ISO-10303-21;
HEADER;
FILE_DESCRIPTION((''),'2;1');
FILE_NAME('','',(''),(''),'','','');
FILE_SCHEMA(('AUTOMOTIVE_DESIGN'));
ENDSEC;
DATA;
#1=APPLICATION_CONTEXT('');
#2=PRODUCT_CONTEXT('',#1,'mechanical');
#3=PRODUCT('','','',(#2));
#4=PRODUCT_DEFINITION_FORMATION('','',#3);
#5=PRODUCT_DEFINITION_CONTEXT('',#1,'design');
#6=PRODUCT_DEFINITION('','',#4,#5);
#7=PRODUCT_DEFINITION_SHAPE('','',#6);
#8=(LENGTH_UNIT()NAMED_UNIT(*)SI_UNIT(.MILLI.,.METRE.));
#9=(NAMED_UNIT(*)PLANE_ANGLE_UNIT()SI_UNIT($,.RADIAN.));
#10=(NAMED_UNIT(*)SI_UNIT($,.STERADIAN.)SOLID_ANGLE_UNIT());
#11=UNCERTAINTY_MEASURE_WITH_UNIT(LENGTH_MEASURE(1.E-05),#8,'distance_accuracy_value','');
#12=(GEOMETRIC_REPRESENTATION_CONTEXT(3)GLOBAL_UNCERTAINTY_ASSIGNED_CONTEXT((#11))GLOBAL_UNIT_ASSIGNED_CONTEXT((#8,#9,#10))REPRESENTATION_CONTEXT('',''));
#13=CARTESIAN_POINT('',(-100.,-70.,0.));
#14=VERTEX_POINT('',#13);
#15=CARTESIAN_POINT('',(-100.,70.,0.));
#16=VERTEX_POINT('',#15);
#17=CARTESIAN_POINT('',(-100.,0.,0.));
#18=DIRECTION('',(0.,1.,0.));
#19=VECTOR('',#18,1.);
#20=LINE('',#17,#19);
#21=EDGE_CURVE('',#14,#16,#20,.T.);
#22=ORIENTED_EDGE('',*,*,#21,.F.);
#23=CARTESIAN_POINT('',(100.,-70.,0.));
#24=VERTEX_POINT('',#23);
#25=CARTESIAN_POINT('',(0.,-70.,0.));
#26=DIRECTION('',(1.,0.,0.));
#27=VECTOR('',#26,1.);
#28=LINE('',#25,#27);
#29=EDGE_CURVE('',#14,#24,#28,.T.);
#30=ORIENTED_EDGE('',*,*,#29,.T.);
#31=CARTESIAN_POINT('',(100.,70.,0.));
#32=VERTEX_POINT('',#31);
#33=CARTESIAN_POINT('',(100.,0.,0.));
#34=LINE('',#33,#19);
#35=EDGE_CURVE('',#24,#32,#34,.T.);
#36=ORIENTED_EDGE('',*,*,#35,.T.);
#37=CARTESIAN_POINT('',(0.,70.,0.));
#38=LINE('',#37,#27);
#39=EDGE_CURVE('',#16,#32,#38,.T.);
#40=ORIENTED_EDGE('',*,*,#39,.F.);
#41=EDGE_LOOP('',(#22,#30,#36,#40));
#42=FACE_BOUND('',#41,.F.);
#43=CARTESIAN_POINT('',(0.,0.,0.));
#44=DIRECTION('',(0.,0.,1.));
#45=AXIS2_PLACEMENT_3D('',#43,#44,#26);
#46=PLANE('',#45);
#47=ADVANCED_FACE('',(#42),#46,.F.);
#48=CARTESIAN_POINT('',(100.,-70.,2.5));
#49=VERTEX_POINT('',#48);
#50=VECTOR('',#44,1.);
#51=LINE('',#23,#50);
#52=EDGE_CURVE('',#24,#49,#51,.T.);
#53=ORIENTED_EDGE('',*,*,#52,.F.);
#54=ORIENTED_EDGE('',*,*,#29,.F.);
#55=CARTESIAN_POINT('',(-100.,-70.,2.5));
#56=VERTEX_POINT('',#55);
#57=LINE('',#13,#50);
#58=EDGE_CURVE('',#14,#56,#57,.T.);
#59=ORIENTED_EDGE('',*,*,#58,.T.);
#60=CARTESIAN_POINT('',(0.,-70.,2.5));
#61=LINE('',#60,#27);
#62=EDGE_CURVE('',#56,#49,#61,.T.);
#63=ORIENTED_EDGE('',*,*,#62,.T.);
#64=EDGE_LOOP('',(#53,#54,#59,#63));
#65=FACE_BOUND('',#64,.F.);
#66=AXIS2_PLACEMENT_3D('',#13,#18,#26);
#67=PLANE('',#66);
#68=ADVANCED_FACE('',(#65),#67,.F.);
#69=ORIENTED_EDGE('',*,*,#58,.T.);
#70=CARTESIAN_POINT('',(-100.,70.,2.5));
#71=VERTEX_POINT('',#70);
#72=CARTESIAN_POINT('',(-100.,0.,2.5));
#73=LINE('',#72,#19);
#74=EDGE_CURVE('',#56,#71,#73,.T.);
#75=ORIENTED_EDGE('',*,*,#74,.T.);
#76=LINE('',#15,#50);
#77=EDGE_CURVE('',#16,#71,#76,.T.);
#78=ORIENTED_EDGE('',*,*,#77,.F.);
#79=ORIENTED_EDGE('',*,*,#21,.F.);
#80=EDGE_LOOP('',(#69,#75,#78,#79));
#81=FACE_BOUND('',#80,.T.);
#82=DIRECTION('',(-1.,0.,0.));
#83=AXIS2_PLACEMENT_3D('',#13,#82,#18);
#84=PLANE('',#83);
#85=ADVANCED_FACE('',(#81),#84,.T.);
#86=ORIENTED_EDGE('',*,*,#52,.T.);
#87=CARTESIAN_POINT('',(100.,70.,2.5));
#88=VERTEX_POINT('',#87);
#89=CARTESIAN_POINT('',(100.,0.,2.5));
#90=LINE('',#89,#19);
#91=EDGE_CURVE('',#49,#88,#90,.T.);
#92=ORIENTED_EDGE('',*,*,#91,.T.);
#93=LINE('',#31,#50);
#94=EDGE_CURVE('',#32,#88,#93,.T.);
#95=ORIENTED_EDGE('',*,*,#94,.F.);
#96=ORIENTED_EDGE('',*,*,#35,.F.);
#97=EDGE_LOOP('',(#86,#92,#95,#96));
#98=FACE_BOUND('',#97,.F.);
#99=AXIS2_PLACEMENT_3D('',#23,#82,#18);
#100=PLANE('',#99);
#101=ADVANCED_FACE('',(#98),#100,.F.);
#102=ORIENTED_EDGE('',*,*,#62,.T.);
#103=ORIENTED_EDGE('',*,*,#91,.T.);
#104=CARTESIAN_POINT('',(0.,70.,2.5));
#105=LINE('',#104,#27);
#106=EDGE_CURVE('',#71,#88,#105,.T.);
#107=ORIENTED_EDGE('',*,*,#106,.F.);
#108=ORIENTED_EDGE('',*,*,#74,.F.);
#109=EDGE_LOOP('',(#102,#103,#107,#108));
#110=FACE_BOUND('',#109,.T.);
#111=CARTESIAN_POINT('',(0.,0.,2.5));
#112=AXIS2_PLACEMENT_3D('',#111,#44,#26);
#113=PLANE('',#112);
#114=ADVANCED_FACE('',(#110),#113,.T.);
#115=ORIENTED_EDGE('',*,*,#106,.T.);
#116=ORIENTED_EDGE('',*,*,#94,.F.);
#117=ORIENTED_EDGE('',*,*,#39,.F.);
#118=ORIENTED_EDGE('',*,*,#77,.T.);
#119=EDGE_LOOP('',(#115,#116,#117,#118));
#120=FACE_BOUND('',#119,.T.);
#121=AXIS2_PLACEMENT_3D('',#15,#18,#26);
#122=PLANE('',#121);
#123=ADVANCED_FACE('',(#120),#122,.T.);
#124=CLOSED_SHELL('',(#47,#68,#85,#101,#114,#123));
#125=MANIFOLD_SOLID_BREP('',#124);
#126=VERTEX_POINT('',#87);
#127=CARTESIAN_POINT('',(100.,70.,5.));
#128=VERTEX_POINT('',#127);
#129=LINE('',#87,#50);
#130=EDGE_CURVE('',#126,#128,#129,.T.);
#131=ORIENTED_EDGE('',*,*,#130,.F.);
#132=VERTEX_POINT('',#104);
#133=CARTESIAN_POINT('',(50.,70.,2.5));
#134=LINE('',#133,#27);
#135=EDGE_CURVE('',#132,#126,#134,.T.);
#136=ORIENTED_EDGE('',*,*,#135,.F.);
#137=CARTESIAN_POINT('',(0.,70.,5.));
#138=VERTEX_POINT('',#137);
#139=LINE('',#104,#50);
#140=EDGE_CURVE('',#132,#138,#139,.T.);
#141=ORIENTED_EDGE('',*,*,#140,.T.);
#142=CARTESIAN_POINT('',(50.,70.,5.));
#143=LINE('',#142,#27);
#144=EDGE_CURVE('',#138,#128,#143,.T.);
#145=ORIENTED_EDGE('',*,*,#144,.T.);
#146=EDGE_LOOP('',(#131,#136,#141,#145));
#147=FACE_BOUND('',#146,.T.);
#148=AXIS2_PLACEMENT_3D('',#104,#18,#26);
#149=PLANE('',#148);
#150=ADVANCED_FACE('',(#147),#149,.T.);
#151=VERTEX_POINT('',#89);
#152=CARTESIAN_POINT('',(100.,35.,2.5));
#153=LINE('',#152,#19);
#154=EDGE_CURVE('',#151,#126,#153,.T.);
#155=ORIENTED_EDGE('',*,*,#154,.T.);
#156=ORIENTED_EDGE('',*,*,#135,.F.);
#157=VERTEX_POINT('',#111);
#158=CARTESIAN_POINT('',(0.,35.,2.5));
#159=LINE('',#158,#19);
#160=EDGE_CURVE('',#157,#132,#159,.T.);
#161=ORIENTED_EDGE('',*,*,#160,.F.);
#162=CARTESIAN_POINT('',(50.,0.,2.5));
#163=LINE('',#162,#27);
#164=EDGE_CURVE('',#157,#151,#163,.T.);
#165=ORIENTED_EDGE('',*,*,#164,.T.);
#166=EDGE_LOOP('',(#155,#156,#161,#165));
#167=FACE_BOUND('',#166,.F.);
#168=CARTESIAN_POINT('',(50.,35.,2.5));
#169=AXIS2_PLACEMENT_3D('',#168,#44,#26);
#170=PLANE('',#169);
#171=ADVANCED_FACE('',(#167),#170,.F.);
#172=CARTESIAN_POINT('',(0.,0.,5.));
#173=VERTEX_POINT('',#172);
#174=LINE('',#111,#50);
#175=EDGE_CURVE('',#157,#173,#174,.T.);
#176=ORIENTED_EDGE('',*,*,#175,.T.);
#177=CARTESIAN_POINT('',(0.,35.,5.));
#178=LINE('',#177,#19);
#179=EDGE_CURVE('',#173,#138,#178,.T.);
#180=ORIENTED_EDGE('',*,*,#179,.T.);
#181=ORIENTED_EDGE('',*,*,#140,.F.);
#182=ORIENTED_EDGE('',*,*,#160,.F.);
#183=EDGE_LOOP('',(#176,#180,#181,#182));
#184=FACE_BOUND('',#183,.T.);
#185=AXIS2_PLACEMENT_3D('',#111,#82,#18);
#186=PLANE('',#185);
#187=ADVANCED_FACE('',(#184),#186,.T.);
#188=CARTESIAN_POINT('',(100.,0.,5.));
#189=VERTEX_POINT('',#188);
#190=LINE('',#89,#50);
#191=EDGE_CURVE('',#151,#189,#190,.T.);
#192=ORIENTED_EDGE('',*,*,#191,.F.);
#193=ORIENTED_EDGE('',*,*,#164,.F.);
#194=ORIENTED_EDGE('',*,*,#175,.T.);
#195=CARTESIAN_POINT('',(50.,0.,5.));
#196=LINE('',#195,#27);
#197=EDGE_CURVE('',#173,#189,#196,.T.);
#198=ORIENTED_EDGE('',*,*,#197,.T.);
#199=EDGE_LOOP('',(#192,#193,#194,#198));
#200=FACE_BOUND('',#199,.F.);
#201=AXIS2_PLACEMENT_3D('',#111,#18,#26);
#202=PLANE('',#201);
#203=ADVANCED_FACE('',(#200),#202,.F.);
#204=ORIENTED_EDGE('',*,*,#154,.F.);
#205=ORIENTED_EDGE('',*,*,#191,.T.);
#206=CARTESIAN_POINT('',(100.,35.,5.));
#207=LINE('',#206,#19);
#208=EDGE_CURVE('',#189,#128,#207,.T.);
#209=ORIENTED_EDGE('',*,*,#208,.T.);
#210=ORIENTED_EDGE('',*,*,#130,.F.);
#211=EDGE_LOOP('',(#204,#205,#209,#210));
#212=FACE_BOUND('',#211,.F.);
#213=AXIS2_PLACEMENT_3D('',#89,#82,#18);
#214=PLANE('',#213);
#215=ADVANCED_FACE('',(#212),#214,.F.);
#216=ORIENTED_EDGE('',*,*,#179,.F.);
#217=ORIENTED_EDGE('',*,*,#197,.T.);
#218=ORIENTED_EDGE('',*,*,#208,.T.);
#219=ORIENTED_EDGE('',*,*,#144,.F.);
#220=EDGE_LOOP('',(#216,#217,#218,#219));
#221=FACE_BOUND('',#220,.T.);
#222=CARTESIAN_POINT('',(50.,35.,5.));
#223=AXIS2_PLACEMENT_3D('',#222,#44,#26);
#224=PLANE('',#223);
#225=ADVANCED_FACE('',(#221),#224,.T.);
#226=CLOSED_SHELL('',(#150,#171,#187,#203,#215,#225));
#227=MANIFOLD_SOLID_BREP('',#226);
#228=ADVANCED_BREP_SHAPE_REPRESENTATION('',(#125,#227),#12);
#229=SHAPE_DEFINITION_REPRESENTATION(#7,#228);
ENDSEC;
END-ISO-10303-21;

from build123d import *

# Parameters (mm, degrees)
F0_W     = 200
F0_H     = 140
F1_DEPTH = 2.5
F2_W     = 100
F2_H     = 70
F3_DEPTH = 2.5


# Not quite as in the source:
# - a feature names something its author has since deleted; it is built from what else it names


with BuildPart() as f1:
    # F0 (on Top) → F1 (new body)
    with BuildSketch(Plane.XY):
        Rectangle(F0_W, F0_H)
    extrude(amount=F1_DEPTH)


with BuildPart() as f3:
    # F2 (on face) → F3 (new body)
    with BuildSketch(Plane.XY.offset(2.5)):
        with Locations((50, 35)):
            Rectangle(F2_W, F2_H)
    extrude(amount=F3_DEPTH)


solid = Compound([f1.part, f3.part])
